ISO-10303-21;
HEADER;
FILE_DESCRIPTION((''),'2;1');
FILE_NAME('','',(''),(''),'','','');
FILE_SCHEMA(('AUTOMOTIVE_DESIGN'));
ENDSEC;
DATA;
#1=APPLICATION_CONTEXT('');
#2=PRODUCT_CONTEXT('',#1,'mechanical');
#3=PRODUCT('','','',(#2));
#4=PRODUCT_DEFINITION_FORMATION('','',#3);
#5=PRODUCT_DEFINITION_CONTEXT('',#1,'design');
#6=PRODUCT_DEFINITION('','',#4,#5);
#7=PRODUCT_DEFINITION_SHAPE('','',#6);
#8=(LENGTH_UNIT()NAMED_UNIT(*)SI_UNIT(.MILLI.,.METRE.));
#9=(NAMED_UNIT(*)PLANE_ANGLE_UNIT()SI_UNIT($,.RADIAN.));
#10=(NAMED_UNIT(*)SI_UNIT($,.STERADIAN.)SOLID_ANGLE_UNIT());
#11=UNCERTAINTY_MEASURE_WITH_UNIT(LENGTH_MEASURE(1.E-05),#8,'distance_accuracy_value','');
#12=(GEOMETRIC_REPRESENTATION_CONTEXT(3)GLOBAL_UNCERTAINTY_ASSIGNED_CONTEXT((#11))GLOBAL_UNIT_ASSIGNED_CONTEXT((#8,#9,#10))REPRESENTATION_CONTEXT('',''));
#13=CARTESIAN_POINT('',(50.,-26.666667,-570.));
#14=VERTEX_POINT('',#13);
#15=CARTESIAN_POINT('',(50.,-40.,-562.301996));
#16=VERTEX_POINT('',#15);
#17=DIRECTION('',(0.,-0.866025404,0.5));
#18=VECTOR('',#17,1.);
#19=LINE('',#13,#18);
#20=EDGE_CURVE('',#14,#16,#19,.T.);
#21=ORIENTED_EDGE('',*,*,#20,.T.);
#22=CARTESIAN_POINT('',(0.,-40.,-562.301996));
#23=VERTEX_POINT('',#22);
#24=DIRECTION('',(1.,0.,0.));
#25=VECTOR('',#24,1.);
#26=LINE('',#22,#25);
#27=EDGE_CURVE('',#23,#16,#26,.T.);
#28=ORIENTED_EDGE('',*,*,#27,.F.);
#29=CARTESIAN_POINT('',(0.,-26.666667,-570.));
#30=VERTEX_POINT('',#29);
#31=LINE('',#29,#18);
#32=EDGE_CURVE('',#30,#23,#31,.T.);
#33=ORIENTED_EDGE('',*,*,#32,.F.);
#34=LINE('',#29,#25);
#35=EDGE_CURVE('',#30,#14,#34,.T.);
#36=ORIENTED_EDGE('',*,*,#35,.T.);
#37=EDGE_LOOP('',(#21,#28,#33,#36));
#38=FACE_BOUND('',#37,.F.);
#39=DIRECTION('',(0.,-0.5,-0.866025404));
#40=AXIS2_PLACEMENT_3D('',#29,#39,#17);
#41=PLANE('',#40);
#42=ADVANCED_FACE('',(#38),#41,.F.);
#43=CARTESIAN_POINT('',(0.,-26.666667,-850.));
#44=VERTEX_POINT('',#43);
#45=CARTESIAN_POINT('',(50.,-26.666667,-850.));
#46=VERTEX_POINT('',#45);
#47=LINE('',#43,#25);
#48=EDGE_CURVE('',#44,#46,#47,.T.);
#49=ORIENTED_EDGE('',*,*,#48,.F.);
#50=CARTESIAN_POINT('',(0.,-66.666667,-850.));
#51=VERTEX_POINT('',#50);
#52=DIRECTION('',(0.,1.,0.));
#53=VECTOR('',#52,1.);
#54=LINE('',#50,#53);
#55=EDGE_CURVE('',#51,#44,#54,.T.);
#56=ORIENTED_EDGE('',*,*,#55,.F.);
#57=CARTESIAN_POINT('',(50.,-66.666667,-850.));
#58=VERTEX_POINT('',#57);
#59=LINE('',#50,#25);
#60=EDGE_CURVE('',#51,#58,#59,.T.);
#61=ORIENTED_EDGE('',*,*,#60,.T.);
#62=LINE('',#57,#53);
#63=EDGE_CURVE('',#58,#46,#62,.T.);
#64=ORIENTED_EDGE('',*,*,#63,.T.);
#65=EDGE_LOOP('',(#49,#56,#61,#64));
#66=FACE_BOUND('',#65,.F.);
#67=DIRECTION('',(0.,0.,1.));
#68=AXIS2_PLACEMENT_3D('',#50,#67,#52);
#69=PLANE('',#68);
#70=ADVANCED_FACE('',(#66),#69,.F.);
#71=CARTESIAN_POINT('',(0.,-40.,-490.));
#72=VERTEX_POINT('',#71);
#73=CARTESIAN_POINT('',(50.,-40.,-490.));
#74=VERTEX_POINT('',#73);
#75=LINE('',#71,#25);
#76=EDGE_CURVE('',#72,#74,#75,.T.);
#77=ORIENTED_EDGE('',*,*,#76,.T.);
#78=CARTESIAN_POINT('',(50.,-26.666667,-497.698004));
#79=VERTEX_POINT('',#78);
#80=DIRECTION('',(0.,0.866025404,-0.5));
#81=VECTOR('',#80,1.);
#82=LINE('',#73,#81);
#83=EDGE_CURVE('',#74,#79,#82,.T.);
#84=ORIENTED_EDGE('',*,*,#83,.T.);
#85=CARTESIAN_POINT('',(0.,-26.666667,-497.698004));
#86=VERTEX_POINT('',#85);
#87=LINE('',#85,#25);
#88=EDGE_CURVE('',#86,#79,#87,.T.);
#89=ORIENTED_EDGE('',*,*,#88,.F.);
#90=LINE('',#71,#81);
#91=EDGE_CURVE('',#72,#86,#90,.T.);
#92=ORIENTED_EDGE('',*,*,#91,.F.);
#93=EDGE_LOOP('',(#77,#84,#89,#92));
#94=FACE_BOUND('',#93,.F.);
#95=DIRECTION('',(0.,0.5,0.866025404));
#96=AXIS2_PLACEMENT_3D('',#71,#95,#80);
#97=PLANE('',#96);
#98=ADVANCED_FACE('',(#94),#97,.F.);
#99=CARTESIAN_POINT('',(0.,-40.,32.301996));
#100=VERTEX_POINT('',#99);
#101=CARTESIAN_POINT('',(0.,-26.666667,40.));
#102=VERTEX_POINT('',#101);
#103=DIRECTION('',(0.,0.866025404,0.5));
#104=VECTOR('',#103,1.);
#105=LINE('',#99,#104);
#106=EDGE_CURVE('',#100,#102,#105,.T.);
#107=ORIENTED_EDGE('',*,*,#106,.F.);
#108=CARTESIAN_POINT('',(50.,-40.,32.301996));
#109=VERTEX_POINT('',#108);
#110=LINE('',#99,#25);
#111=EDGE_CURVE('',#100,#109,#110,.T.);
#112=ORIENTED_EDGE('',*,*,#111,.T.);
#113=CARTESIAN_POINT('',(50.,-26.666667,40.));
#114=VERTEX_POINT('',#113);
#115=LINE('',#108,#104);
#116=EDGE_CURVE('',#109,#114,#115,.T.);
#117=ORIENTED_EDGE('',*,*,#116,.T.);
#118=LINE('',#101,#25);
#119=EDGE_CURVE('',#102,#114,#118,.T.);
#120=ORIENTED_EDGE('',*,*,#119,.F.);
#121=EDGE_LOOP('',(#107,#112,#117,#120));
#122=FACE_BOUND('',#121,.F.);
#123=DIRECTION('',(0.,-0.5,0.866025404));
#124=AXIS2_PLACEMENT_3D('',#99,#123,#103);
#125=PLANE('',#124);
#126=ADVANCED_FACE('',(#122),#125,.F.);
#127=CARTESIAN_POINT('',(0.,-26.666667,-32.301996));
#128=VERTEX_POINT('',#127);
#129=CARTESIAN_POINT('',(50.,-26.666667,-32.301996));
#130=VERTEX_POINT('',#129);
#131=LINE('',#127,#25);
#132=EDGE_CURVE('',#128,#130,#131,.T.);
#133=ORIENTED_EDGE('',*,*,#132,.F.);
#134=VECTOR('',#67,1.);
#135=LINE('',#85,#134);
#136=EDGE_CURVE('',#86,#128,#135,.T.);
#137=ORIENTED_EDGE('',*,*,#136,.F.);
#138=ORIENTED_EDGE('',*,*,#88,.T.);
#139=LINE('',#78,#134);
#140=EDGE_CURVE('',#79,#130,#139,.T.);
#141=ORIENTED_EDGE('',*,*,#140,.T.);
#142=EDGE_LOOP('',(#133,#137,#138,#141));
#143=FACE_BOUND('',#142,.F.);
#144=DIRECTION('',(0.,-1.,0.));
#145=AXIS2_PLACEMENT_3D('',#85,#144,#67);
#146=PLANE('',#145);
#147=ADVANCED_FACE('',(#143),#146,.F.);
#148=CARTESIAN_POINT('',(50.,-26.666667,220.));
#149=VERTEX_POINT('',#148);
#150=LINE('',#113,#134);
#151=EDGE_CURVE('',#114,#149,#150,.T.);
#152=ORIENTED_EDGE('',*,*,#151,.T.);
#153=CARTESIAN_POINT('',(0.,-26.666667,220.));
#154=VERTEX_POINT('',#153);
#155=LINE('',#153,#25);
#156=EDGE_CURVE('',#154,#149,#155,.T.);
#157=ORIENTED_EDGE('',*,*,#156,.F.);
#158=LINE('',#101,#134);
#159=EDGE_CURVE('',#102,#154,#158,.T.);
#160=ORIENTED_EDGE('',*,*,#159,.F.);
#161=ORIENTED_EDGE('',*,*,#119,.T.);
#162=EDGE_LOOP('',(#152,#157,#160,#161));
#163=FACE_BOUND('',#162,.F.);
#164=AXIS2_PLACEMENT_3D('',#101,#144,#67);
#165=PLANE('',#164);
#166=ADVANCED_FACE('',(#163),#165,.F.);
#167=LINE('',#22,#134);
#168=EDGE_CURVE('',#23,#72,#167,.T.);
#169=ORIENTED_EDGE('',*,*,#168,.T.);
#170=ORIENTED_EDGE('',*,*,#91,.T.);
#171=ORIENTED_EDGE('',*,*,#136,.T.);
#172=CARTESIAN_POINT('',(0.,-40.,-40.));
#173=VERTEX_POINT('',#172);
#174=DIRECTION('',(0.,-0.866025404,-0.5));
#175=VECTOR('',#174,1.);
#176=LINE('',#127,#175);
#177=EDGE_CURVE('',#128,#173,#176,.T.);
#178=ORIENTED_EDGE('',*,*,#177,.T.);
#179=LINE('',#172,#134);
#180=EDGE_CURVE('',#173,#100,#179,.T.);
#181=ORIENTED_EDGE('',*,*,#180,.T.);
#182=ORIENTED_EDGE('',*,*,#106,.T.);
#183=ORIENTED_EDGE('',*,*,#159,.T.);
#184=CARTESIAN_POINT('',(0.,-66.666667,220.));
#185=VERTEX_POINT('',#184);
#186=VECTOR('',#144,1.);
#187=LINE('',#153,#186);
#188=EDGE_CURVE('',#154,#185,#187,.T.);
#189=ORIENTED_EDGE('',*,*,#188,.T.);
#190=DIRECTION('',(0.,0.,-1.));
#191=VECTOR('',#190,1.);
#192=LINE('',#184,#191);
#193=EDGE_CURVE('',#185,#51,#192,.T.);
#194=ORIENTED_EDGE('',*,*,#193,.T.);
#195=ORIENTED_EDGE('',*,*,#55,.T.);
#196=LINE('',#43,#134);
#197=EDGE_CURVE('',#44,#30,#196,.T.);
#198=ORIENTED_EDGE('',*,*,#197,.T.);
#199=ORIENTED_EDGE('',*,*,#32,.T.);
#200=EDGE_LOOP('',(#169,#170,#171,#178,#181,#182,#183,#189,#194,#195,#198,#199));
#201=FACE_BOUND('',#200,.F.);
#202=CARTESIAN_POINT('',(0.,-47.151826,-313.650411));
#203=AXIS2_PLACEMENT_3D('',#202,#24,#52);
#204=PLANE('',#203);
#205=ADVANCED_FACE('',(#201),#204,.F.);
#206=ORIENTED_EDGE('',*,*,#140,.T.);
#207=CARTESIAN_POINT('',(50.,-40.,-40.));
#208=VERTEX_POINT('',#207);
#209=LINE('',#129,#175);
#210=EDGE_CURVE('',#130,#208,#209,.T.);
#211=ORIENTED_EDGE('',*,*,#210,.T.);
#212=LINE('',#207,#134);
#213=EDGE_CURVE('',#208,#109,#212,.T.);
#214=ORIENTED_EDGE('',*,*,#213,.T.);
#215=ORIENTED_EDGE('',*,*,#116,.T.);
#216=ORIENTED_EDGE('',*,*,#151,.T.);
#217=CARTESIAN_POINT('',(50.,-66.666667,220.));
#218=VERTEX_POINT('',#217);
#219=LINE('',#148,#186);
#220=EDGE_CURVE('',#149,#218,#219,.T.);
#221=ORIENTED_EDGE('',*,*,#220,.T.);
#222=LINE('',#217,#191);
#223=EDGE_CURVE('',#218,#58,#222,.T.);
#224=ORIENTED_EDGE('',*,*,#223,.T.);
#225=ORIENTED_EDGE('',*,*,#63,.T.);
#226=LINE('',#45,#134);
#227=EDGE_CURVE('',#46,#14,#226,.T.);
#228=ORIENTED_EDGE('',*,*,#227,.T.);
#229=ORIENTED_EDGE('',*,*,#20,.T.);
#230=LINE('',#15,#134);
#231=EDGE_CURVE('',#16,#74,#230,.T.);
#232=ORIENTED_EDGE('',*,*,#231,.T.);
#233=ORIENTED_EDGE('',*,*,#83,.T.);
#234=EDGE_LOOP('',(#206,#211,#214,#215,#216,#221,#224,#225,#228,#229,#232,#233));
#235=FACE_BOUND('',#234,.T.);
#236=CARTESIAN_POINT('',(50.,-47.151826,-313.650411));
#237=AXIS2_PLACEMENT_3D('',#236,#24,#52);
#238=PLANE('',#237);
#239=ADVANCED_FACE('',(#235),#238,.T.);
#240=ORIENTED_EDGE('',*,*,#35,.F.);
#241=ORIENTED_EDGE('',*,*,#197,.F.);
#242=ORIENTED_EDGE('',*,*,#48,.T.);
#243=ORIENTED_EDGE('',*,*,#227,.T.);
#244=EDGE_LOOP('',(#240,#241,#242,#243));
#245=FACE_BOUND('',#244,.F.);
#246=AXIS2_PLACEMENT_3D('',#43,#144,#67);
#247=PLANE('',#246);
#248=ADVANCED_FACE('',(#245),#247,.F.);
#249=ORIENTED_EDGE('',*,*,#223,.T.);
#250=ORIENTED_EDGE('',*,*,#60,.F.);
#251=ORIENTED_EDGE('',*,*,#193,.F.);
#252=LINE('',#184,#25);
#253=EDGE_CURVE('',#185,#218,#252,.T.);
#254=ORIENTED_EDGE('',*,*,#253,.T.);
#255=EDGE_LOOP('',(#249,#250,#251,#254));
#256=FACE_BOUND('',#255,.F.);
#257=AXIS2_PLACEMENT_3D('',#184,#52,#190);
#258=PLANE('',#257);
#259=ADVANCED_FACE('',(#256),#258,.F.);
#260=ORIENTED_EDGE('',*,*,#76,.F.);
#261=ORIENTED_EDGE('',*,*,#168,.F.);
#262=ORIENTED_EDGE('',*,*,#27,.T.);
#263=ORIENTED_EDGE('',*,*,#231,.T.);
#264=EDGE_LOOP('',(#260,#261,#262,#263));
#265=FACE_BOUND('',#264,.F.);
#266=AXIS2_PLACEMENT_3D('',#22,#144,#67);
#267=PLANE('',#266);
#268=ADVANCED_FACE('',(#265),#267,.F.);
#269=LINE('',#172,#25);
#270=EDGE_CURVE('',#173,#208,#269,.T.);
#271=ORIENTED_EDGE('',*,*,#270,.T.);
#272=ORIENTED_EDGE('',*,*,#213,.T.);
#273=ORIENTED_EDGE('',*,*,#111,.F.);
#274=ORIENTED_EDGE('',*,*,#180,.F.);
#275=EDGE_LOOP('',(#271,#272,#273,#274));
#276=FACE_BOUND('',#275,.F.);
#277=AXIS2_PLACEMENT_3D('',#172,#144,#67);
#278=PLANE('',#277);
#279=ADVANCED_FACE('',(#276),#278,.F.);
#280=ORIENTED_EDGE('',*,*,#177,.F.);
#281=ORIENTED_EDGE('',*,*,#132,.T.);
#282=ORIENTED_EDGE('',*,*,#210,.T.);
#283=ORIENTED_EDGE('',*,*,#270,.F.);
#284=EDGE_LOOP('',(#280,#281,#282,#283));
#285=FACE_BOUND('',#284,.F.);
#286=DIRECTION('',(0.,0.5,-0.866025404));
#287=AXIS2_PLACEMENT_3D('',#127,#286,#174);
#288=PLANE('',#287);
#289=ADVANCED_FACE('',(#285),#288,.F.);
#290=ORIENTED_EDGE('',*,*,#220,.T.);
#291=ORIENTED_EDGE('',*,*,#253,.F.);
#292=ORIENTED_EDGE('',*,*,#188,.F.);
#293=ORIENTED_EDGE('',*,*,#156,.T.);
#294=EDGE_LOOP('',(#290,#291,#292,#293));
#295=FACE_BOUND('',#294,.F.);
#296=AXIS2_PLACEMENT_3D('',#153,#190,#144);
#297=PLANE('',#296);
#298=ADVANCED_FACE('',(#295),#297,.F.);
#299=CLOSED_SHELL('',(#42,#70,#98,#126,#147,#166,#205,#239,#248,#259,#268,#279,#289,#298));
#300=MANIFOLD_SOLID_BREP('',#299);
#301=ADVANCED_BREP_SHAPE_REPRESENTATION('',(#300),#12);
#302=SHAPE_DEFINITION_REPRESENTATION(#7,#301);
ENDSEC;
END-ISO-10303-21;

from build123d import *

# Parameters (mm, degrees)
F2_DEPTH = 50


# Not quite as in the source:
# - a feature names something its author has since deleted; it is built from what else it names


with BuildPart() as f2:
    # F1 (on Right) → F2 (new body)
    with BuildSketch(Plane.YZ):
        Polygon((-26.6666666667, 40), (-26.6666666667, 220), (-66.6666666667, 220), (-66.6666666667, -850), (-26.6666666667, -850), (-26.6666666667, -570), (-40, -562.3019964108), (-40, -490), (-26.6666666667, -497.6980035892), (-26.6666666667, -32.3019964108), (-40, -40), (-40, 32.3019964108), align=None)
    extrude(amount=F2_DEPTH)


solid = f2.part
